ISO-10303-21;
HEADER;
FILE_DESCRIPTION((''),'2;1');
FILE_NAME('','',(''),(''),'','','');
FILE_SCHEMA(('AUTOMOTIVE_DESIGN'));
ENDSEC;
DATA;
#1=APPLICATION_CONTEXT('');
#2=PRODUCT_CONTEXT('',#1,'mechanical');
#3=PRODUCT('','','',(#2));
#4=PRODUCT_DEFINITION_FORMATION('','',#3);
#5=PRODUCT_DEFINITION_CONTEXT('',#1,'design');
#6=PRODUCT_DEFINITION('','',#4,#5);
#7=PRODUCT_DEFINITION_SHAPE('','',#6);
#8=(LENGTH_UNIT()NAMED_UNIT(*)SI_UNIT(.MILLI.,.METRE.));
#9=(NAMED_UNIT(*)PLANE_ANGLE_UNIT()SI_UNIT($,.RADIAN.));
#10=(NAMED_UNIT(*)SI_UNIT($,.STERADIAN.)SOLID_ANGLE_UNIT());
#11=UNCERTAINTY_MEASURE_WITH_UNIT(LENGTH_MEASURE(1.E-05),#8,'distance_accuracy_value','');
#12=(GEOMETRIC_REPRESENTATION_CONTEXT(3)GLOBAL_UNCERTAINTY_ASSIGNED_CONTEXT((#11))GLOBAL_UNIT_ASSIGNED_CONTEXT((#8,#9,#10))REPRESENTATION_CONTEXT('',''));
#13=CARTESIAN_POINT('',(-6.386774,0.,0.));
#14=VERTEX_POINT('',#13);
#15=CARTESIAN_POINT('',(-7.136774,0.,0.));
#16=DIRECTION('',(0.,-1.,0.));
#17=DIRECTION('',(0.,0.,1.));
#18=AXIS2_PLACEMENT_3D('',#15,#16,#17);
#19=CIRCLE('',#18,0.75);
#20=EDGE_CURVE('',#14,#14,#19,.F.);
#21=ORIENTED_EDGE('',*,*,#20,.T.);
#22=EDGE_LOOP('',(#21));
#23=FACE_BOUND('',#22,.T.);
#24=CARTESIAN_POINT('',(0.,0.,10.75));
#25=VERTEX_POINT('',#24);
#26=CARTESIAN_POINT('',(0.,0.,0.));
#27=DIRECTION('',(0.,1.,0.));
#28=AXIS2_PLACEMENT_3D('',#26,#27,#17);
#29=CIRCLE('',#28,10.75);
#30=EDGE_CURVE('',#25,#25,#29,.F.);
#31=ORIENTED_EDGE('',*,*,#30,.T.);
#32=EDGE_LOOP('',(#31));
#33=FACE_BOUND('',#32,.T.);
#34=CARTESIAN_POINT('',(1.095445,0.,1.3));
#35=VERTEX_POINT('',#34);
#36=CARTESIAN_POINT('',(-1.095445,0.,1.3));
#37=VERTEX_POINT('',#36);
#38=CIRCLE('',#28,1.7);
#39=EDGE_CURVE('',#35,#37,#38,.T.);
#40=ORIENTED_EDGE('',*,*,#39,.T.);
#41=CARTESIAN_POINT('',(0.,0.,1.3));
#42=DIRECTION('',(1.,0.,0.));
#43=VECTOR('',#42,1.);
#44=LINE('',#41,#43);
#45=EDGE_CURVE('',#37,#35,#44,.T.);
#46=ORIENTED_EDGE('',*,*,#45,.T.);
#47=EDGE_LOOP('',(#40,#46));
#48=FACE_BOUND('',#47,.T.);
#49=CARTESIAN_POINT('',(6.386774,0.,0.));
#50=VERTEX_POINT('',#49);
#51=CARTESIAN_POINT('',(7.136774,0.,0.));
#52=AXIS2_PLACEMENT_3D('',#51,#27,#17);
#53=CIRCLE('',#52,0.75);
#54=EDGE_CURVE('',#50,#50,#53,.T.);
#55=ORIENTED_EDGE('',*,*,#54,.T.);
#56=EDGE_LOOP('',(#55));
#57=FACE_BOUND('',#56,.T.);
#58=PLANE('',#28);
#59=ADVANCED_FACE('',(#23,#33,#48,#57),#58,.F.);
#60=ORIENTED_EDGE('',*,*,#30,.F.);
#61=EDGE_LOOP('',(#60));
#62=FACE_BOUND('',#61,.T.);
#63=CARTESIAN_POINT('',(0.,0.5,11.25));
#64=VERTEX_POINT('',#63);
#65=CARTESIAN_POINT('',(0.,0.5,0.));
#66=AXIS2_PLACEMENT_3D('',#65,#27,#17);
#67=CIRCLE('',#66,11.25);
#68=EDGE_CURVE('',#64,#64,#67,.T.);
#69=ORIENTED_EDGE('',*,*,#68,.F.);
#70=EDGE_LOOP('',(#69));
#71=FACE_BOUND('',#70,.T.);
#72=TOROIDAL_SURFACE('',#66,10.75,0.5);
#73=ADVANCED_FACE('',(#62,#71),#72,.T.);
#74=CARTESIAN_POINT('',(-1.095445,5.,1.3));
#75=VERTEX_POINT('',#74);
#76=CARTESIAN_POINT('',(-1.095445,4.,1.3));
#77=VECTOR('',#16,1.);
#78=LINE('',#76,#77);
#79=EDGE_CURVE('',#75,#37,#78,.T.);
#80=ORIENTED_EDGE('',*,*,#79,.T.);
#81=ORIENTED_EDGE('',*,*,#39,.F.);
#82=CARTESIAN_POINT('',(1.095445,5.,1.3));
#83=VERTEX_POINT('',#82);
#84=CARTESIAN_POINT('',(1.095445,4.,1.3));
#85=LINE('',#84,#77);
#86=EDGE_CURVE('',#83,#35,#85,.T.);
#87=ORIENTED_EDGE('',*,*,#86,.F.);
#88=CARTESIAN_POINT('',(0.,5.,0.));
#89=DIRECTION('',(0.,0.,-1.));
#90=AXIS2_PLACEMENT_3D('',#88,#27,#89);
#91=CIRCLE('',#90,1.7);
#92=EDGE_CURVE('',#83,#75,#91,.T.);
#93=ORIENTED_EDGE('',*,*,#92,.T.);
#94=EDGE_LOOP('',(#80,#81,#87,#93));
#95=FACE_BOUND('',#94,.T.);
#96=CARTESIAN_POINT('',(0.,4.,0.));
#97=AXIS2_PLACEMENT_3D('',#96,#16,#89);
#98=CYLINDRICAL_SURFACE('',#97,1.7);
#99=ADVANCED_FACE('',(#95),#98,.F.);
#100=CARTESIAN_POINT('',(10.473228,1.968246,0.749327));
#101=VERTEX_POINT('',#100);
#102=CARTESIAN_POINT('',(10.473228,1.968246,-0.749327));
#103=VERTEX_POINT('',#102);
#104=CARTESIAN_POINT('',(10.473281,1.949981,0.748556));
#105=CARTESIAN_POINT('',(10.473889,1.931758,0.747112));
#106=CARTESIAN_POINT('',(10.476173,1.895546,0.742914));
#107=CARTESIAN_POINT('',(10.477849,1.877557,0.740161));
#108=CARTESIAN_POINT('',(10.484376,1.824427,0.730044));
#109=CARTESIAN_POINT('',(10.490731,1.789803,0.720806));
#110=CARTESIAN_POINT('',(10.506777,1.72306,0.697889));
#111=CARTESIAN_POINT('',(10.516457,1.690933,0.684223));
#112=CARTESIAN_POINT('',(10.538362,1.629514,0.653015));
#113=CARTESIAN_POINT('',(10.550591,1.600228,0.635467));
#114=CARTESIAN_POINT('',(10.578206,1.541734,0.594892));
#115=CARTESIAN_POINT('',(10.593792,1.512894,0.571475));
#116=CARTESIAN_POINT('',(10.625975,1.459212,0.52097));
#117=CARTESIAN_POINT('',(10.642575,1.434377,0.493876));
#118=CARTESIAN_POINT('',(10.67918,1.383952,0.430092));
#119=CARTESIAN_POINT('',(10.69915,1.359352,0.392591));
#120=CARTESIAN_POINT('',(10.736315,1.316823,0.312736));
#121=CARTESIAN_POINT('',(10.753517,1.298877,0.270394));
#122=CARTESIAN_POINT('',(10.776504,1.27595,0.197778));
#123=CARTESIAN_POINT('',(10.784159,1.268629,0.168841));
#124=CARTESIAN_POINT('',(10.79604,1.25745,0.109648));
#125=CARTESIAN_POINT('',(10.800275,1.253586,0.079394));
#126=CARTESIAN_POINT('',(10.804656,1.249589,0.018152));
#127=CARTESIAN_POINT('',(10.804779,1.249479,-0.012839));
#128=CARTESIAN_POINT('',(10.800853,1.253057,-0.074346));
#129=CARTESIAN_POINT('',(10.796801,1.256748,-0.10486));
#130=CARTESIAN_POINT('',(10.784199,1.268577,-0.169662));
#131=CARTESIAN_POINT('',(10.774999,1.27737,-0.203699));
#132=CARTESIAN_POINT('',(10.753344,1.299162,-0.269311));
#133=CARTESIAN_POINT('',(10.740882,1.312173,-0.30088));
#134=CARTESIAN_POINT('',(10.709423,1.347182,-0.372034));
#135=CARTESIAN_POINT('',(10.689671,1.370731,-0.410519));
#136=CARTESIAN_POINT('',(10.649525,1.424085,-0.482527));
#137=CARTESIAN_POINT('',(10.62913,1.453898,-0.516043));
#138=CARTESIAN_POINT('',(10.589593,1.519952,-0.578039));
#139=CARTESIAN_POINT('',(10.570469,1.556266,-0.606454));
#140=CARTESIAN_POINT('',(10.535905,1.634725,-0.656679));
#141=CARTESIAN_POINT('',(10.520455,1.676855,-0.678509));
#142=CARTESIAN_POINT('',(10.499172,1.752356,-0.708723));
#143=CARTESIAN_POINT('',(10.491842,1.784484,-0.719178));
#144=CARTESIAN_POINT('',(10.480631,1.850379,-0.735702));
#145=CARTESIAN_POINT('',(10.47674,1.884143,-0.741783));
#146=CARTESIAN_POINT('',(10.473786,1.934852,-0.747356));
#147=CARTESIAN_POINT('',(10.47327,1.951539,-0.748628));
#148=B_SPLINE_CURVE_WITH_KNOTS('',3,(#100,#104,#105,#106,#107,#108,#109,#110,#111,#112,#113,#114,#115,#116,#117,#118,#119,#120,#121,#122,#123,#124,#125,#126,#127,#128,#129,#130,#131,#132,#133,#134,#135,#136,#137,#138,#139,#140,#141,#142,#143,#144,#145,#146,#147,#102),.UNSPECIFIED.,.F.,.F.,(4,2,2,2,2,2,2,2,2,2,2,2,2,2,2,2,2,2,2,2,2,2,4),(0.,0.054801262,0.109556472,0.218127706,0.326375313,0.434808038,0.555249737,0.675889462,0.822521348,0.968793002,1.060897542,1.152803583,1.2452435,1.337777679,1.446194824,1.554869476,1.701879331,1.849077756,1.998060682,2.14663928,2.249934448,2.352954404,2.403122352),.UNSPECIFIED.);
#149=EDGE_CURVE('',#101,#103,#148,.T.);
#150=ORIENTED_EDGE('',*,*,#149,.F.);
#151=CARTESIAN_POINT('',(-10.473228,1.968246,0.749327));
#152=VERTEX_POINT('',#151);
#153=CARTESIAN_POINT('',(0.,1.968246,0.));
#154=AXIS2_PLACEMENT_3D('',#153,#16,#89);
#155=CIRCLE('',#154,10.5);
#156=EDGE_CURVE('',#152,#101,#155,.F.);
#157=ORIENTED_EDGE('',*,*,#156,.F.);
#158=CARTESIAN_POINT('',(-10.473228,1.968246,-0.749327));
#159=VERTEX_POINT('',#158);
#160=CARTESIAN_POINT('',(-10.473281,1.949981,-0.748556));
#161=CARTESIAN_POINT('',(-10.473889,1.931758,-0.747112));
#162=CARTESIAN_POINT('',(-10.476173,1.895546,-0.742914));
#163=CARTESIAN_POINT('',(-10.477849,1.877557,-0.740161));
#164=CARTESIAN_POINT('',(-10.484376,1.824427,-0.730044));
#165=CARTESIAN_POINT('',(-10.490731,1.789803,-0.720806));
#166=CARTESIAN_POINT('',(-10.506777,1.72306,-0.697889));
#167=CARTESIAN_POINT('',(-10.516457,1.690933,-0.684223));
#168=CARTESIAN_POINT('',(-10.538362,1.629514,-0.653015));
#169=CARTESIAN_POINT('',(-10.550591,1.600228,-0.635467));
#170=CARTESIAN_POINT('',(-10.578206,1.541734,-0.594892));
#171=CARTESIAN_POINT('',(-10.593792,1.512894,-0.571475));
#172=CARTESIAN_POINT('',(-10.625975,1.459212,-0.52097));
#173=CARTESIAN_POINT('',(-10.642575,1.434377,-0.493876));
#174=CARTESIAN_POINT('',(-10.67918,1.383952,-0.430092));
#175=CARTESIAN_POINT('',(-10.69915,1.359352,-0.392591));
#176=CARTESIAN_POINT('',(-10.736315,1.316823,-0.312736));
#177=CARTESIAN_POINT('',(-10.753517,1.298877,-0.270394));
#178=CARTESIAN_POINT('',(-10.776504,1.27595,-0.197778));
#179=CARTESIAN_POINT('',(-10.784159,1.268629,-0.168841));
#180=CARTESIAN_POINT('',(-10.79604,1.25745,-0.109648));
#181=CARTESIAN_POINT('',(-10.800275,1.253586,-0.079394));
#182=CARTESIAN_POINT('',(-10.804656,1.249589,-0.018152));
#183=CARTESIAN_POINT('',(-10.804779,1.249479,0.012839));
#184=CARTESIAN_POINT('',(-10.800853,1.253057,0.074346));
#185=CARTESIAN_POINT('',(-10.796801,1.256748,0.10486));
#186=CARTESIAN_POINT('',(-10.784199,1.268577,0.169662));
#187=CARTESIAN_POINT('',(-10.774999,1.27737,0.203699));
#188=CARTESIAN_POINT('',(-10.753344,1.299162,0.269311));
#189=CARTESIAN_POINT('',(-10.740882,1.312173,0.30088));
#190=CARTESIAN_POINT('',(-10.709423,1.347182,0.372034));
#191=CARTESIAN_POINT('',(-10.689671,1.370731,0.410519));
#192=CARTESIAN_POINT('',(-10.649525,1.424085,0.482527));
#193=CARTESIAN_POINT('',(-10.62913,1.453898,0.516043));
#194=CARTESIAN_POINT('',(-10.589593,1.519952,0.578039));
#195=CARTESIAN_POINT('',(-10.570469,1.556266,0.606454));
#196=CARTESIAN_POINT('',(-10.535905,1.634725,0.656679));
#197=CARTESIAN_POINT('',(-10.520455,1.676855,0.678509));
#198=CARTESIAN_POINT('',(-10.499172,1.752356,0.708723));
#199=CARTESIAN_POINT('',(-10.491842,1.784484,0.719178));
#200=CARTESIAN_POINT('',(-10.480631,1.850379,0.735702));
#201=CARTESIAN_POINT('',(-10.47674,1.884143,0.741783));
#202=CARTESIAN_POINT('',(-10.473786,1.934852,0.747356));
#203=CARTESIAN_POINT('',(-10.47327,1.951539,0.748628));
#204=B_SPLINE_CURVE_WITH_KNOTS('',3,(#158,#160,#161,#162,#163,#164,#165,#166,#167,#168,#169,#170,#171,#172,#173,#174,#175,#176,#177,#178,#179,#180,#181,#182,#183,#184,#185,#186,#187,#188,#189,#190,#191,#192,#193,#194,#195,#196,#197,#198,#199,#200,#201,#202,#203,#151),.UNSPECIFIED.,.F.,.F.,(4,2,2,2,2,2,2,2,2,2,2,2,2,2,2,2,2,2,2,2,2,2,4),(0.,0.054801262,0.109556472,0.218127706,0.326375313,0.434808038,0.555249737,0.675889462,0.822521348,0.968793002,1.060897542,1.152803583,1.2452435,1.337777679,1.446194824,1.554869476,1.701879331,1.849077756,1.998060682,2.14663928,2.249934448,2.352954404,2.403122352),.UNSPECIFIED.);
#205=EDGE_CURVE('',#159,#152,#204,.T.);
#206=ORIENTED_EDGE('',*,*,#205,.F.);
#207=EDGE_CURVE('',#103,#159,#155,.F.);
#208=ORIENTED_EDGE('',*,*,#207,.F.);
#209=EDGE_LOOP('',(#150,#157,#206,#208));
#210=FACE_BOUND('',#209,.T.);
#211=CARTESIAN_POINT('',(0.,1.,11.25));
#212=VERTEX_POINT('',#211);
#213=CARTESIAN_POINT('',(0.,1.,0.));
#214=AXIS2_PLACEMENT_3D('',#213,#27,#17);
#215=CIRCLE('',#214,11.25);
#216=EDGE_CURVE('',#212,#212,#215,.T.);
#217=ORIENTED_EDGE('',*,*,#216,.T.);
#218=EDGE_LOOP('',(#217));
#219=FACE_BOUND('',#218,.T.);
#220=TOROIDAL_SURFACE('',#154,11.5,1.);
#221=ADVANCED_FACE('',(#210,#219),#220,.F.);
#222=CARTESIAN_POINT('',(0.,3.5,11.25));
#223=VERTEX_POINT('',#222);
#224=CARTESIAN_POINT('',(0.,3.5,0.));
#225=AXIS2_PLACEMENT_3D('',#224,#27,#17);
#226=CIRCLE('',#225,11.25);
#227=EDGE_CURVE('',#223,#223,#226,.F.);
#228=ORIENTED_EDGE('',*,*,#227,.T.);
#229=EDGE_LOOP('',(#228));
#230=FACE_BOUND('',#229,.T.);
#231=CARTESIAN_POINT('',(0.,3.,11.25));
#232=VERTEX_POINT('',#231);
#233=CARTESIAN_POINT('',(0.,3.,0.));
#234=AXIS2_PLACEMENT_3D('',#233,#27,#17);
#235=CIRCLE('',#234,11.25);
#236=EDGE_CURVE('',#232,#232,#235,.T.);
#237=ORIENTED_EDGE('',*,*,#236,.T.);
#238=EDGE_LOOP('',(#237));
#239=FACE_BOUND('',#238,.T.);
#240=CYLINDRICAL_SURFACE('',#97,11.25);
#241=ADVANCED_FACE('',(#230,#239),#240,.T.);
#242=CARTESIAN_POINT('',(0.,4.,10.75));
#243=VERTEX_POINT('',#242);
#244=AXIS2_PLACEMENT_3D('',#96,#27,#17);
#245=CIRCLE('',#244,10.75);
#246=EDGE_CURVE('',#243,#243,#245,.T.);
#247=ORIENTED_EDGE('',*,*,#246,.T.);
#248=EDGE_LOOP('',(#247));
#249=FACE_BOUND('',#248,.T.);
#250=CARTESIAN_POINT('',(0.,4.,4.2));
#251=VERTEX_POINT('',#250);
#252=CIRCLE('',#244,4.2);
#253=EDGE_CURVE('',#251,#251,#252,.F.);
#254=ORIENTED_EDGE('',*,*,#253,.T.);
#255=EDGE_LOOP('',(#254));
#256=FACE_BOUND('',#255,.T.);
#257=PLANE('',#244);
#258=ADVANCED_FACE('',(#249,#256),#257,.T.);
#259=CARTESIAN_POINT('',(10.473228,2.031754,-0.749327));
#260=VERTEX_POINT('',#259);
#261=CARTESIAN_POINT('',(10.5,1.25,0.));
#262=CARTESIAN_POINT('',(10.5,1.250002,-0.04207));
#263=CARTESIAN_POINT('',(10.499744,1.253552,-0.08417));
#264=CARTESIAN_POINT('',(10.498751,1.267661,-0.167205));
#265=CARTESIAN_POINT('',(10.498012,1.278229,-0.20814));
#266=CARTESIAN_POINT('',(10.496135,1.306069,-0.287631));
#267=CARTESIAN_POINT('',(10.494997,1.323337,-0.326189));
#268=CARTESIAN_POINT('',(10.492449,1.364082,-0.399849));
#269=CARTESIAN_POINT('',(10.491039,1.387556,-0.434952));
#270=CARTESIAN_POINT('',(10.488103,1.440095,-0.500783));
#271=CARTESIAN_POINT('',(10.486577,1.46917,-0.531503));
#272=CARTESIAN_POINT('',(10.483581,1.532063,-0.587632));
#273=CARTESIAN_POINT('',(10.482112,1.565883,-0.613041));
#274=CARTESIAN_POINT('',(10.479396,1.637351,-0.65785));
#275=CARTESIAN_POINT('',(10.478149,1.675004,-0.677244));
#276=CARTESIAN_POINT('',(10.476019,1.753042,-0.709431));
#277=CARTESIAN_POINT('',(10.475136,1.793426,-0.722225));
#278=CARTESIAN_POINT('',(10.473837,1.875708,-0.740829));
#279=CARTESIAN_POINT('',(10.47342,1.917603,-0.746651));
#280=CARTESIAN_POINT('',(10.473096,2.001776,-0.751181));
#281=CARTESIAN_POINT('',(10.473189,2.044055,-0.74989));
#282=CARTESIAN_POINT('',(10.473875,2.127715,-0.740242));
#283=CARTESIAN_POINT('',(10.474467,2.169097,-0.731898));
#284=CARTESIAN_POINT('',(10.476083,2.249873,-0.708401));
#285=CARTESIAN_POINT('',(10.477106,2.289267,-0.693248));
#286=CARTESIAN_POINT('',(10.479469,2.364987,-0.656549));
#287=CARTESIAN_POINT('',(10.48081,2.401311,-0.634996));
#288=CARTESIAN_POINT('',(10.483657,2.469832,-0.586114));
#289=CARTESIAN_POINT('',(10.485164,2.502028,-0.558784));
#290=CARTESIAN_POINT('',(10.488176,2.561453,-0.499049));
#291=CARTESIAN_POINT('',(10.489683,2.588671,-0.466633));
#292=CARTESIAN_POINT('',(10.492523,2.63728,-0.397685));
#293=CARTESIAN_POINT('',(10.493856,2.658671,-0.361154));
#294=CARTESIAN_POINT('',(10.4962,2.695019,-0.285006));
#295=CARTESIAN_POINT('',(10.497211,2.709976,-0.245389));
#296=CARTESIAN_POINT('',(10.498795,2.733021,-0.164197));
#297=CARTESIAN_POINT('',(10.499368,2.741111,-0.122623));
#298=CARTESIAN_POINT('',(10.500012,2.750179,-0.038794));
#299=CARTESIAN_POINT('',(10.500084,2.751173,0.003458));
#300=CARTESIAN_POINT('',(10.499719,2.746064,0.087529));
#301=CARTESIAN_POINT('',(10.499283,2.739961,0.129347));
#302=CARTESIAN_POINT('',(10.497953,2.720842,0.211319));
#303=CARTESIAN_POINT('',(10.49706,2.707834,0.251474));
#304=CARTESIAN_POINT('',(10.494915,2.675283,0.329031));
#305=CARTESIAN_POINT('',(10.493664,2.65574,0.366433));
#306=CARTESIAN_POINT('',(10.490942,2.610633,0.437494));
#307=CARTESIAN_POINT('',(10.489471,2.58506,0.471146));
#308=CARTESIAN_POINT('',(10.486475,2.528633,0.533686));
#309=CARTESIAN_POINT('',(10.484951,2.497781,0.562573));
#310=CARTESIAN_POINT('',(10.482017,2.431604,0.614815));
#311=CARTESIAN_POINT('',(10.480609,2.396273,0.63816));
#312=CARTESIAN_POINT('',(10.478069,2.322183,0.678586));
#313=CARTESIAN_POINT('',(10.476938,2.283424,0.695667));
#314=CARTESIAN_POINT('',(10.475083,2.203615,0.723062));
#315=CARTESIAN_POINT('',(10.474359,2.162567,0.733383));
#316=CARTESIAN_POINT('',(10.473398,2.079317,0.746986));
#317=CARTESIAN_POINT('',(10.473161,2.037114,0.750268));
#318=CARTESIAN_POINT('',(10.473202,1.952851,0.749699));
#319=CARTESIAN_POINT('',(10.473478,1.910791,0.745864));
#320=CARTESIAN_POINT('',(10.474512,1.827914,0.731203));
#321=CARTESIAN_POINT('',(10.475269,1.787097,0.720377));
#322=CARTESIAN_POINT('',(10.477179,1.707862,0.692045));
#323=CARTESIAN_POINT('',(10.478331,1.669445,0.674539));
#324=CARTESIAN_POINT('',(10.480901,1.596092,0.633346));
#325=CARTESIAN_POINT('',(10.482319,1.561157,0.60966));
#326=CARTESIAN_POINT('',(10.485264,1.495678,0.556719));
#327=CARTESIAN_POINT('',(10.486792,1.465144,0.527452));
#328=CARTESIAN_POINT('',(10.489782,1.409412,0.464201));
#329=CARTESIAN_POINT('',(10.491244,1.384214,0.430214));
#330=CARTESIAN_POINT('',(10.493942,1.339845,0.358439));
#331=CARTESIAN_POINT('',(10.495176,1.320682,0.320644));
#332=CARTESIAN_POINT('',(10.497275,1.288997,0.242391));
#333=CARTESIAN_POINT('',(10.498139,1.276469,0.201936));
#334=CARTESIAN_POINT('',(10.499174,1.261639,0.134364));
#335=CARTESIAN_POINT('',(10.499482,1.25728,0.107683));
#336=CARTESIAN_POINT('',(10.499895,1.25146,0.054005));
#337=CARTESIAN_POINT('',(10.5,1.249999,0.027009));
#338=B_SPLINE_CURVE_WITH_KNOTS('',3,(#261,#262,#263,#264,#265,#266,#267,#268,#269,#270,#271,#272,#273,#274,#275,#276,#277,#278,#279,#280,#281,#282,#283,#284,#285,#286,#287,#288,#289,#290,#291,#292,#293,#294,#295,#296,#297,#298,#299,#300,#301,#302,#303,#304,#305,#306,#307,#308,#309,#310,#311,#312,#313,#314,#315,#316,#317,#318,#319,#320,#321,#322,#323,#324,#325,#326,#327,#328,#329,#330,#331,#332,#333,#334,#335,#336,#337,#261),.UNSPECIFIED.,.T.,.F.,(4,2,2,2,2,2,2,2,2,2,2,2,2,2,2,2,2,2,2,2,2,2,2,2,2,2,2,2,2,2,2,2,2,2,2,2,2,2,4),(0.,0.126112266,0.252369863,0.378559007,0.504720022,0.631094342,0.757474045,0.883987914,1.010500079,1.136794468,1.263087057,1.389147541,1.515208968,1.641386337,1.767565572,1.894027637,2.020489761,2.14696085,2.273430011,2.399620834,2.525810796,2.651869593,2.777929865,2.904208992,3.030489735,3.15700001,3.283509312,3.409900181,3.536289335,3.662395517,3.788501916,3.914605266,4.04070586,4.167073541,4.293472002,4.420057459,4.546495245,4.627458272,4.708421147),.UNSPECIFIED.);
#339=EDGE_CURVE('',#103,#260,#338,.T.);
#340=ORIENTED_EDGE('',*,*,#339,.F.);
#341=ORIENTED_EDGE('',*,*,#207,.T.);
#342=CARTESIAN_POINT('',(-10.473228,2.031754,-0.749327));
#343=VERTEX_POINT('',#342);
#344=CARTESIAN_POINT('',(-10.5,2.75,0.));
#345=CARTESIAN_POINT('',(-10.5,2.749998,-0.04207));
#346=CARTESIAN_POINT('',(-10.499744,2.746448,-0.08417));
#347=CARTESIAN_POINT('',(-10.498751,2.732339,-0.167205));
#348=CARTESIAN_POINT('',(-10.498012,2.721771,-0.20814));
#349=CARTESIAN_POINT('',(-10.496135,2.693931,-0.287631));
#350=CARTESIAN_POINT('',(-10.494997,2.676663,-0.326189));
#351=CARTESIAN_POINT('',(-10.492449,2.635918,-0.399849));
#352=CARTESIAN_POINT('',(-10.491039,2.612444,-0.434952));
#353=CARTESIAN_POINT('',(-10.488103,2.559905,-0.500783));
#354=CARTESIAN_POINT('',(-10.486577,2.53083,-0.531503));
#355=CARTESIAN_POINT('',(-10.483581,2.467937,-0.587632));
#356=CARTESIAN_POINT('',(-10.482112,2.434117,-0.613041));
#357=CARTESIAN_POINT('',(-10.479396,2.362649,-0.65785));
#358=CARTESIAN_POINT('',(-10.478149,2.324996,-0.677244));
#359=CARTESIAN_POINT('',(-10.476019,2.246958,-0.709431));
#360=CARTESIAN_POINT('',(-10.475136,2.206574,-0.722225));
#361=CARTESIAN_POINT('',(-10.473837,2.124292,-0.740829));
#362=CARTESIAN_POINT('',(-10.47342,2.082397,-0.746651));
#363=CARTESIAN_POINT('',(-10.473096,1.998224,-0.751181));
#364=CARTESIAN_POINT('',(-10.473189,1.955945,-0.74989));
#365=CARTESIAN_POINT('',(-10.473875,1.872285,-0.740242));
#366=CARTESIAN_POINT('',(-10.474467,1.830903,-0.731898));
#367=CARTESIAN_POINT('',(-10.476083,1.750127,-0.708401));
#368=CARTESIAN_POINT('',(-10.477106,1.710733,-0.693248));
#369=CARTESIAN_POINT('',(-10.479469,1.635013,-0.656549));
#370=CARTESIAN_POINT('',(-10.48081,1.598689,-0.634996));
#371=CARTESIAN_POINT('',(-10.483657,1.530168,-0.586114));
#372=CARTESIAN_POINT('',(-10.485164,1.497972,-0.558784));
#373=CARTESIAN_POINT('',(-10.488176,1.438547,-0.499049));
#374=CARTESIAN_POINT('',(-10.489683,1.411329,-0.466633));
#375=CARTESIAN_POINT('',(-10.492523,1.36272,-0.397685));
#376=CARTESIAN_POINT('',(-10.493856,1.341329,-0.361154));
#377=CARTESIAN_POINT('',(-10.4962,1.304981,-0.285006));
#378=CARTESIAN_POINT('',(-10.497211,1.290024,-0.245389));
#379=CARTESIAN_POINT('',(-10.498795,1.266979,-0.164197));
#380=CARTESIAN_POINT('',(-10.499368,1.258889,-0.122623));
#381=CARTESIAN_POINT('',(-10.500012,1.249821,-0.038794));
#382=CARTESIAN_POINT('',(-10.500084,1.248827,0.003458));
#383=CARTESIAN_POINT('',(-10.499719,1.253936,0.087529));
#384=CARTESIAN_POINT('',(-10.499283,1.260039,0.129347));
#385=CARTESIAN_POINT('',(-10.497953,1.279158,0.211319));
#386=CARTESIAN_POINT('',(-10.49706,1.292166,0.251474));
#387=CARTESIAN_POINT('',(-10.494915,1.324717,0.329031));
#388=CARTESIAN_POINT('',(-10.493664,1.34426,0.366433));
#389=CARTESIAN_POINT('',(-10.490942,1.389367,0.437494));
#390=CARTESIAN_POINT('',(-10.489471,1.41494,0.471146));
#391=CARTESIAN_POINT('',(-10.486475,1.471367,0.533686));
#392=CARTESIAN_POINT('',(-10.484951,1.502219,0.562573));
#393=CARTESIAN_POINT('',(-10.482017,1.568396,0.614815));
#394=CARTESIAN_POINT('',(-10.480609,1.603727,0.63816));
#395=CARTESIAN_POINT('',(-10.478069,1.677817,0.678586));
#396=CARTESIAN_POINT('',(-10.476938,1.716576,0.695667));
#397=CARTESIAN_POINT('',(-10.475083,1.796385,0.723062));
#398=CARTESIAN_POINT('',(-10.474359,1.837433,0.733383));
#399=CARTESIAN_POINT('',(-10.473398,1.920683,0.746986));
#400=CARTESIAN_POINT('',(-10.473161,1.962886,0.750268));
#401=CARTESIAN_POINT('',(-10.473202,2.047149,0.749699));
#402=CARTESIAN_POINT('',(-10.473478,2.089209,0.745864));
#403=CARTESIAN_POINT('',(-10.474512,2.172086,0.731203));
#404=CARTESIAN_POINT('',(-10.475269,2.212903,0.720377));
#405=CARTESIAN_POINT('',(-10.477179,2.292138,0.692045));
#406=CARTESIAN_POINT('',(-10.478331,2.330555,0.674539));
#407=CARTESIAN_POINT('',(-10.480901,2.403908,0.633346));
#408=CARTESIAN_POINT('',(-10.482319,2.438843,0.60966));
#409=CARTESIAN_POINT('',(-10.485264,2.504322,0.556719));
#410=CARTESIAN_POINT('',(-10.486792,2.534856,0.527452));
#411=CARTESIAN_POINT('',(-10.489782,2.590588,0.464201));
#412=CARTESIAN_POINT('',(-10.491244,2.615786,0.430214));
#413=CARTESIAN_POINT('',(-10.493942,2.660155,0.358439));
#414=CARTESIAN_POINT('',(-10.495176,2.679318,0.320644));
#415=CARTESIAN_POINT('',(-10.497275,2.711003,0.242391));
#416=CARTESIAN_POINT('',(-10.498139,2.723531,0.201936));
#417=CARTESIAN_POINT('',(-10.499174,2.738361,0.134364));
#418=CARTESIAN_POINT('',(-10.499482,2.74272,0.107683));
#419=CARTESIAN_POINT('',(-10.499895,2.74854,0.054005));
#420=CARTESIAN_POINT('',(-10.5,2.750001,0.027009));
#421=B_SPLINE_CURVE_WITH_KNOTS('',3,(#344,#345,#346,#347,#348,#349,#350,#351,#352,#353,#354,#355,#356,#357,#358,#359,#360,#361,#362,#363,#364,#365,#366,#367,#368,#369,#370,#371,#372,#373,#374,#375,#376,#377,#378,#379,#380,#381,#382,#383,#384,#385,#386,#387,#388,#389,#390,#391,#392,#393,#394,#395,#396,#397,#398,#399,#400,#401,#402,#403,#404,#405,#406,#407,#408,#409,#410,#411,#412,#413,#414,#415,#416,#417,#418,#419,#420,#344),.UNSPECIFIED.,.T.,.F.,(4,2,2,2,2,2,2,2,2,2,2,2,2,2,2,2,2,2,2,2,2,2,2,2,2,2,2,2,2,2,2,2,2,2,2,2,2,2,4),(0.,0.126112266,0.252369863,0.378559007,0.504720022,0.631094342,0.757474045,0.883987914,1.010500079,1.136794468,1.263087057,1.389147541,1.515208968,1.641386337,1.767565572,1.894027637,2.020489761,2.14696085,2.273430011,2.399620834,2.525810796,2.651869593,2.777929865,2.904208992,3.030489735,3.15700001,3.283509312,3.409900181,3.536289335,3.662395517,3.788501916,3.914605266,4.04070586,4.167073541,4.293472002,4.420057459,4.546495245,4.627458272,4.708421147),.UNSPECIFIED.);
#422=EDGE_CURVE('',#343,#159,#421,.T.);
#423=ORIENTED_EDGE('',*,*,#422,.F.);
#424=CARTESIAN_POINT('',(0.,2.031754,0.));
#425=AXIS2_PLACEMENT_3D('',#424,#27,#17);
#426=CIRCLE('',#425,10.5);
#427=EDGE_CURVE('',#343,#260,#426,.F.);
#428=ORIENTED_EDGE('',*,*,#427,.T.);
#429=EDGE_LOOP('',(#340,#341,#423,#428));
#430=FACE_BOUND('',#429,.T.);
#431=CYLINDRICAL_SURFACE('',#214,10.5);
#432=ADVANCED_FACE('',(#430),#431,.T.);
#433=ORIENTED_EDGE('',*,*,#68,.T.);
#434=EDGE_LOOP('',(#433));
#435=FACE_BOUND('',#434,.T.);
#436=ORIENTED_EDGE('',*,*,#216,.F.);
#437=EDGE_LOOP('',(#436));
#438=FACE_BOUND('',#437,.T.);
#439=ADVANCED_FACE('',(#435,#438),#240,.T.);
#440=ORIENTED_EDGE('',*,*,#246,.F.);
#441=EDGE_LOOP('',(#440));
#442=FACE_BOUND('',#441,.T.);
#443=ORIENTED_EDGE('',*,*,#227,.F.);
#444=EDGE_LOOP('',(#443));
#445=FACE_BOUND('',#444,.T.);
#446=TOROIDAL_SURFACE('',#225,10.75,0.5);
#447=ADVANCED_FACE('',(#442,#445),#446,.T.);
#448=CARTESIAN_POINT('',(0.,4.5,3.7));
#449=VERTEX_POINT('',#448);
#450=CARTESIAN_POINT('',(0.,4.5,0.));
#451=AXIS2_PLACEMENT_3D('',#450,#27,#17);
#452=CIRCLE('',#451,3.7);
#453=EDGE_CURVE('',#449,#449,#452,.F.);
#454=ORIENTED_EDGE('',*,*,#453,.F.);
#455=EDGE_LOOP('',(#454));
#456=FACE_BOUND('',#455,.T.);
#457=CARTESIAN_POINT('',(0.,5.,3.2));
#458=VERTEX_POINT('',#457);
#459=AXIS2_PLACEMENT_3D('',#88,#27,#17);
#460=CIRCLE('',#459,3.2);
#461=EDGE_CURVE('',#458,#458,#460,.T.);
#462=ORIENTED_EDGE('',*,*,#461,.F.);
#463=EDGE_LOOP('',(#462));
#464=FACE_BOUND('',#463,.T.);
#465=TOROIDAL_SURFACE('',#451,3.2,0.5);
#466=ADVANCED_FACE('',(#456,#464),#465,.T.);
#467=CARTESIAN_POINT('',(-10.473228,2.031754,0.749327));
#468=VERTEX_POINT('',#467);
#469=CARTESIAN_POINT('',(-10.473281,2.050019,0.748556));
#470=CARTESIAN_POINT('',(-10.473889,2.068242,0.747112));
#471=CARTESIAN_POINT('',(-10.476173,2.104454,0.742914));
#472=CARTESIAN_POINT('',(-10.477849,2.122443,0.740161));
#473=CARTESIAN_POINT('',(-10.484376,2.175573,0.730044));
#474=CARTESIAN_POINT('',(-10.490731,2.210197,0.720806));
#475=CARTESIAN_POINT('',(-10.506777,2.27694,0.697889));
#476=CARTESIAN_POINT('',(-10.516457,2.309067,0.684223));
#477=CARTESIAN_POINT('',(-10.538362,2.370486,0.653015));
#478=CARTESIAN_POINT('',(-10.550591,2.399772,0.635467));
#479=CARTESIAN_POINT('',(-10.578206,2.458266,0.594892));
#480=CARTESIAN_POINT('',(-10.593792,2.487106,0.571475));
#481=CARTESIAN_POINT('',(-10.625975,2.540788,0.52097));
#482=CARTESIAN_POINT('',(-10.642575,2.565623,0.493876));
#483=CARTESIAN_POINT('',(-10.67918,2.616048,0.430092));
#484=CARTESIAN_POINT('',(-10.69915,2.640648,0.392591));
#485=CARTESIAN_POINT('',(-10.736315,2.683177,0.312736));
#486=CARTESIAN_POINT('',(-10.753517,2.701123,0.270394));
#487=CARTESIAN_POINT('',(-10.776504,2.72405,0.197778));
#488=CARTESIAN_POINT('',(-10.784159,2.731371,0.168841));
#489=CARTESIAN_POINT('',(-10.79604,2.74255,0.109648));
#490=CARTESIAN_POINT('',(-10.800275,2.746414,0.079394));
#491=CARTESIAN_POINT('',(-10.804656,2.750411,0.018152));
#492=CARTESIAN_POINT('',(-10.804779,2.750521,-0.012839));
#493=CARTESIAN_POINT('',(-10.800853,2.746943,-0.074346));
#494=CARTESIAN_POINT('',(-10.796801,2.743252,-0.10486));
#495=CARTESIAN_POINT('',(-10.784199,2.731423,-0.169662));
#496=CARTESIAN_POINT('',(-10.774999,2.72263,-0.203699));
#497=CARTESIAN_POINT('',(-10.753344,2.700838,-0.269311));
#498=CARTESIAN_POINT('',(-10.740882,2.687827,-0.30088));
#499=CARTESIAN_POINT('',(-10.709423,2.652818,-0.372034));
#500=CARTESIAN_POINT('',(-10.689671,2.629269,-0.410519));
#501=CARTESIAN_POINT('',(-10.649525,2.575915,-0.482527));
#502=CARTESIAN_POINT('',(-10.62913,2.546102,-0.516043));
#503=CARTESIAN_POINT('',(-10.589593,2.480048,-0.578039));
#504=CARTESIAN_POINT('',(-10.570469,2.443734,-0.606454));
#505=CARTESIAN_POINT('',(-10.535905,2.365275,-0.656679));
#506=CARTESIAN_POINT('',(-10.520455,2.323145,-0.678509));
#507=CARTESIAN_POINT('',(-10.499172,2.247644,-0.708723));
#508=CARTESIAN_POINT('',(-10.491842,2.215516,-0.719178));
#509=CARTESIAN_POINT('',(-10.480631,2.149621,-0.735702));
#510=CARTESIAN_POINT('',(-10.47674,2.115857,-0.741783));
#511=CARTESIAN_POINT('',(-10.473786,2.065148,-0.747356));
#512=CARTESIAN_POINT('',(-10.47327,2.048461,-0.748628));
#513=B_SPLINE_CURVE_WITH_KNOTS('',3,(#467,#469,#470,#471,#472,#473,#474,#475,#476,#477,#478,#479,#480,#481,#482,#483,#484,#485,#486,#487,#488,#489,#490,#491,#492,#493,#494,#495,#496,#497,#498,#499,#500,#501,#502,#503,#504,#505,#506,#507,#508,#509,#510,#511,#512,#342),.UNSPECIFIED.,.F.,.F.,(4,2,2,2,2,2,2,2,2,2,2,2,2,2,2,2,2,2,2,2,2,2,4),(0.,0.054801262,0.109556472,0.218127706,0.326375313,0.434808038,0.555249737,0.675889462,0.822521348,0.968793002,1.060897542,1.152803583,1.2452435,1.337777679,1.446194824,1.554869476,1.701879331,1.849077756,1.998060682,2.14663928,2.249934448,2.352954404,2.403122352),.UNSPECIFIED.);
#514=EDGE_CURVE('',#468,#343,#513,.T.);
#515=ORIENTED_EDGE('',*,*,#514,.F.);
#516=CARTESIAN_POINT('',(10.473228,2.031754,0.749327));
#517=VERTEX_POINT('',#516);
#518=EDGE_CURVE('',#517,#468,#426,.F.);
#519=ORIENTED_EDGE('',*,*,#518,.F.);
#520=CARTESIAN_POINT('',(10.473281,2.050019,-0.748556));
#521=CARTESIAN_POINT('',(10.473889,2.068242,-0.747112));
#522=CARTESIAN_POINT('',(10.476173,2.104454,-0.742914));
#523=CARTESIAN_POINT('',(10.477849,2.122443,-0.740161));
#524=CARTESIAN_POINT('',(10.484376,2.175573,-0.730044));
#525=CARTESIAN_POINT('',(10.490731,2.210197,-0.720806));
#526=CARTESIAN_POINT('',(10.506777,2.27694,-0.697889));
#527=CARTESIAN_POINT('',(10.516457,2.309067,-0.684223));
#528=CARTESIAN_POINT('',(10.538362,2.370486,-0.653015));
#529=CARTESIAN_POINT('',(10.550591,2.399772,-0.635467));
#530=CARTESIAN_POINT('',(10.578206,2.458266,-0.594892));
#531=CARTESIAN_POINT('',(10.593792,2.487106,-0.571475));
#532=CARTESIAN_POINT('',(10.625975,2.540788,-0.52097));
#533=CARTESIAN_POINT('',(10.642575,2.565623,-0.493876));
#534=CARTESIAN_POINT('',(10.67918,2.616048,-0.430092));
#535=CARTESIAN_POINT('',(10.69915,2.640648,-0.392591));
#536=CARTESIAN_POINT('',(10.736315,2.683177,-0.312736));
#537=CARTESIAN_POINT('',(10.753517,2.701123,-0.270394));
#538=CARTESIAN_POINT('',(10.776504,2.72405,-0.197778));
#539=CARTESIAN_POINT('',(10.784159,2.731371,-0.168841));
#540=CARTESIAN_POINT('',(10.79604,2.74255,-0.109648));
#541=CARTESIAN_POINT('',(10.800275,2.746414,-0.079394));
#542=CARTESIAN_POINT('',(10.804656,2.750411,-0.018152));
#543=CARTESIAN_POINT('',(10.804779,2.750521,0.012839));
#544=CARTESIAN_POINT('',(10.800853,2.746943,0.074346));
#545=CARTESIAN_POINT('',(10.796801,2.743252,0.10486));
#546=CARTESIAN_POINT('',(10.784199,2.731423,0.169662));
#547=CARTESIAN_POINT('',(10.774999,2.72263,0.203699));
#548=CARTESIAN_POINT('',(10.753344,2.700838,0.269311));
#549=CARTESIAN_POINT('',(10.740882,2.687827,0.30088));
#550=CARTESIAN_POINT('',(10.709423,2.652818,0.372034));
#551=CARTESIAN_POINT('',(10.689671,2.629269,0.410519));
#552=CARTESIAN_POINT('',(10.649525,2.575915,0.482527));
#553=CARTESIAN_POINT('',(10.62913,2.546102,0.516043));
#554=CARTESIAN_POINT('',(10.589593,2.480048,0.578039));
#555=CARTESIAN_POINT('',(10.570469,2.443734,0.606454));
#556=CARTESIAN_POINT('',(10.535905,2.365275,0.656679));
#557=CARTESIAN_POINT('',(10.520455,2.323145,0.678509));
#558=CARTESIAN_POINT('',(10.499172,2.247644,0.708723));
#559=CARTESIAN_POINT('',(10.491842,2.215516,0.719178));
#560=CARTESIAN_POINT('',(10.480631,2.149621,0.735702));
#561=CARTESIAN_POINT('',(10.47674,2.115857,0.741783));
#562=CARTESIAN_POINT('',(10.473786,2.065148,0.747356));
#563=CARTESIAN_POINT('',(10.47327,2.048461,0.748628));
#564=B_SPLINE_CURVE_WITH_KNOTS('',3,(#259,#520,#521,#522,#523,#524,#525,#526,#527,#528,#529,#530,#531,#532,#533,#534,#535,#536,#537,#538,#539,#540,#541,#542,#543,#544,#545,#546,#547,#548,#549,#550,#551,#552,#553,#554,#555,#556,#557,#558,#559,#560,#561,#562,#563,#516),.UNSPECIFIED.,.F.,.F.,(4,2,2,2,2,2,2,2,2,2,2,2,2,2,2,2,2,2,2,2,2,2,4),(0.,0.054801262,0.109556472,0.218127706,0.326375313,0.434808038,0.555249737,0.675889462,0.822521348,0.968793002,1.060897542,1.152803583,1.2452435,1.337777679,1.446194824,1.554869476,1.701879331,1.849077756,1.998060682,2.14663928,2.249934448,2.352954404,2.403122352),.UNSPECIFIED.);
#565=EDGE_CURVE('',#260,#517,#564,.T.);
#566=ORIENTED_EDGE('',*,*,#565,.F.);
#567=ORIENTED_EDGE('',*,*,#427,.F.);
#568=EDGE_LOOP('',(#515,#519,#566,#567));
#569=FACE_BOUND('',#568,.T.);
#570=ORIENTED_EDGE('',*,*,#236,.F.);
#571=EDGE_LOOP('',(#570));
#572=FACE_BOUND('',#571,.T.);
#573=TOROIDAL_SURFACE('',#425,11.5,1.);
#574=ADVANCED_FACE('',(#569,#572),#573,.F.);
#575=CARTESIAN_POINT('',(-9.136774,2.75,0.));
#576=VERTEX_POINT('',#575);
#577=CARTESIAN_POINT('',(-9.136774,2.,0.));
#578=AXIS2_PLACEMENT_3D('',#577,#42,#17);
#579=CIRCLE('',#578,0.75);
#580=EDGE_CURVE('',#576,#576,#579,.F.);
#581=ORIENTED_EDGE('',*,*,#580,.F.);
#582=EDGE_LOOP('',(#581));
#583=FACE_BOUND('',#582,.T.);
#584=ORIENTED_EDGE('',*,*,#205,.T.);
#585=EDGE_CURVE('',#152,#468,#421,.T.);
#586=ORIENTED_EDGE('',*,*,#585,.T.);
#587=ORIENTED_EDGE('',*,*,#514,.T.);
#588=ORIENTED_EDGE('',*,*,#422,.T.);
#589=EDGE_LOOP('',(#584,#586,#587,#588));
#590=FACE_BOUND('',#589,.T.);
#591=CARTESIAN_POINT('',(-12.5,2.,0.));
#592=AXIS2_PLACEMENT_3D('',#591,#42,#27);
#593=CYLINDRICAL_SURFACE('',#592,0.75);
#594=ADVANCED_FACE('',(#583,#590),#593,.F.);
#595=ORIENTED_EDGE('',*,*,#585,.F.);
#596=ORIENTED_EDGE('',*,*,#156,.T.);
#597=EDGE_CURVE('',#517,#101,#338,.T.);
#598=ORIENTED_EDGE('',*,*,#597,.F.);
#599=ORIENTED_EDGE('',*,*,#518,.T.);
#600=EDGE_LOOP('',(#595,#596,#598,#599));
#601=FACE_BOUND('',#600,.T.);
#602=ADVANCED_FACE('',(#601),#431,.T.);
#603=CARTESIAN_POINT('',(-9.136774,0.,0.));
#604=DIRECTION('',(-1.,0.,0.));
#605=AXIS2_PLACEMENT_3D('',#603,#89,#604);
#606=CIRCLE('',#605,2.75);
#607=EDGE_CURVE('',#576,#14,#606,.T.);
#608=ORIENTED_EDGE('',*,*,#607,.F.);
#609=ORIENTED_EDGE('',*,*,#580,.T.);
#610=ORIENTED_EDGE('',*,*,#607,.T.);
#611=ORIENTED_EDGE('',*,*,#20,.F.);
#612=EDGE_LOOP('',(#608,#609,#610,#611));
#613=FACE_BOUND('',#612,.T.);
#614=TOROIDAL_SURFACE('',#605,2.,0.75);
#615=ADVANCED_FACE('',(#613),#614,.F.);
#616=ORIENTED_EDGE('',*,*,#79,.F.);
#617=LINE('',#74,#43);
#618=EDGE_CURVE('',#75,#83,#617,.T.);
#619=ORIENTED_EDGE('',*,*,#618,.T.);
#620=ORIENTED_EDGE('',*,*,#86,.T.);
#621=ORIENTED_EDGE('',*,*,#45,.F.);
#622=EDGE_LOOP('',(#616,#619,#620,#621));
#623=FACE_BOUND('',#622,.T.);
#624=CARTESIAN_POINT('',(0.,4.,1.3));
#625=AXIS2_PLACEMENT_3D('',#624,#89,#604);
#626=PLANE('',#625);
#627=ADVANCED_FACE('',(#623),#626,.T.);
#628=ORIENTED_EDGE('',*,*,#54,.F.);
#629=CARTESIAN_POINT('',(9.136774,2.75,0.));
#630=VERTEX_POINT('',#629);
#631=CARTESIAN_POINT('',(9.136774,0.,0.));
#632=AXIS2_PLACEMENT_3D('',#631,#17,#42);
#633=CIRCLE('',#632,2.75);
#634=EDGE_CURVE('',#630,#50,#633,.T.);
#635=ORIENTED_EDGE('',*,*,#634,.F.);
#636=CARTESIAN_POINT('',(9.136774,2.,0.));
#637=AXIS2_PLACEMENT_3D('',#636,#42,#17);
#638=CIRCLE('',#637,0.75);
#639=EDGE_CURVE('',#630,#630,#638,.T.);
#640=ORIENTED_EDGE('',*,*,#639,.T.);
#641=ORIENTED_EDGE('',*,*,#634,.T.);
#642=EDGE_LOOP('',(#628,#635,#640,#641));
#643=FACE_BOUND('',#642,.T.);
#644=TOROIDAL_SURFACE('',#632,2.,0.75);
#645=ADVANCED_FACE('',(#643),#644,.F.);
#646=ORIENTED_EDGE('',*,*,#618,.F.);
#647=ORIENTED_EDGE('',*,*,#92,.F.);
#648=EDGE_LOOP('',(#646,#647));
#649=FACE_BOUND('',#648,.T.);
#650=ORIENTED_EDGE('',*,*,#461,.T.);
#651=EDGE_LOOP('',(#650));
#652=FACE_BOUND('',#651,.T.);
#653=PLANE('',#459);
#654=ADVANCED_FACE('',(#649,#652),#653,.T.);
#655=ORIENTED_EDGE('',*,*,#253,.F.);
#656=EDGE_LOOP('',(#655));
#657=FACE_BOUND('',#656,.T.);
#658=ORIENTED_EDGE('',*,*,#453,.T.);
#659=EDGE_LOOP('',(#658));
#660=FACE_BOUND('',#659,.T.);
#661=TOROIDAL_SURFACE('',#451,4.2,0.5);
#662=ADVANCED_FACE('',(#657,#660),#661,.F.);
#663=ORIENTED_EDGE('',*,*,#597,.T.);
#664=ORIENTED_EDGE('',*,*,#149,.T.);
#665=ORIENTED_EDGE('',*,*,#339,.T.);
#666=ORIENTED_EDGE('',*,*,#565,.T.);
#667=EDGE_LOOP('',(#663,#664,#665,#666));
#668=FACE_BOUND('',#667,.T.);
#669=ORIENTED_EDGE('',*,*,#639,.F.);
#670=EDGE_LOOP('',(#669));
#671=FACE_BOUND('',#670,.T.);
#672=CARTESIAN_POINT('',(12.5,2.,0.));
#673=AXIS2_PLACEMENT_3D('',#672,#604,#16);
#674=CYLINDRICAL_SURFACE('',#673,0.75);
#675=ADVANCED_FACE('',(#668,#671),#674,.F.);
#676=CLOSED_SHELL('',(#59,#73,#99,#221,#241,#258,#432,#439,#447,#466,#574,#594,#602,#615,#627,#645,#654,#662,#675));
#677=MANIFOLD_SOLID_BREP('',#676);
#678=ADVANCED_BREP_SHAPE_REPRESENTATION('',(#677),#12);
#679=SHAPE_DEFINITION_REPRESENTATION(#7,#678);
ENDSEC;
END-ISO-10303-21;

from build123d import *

# Parameters (mm, degrees)
SKETCH1_R            = 11.25
SKETCH1_R_2          = 1.7
BOSS_EXTRUDE1_DEPTH  = 4
SKETCH2_R            = 3.7
BOSS_EXTRUDE2_DEPTH  = 1
CUT_SWEEP1_PROFILE_R = 0.75
SKETCH21_R           = 12.5
SKETCH21_R_2         = 10.5
CUT_EXTRUDE1_DEPTH   = 1
FILLET1_R            = 1
FILLET2_R            = 0.5


# Some blends are built 0.0001 mm under size
with BuildPart() as part:
    # Sketch1 → Boss-Extrude1 (new body)
    # profile 1 of 5: a face of its own
    with BuildSketch(Plane(origin=(0, 0, 0), x_dir=(1, 0, 0), z_dir=(0, 1, 0))):
        with Locations(Location((0, 0, 0), (0, 0, 270))):
            Circle(SKETCH1_R)
        Circle(SKETCH1_R_2, mode=Mode.SUBTRACT)
    # profile 2 of 5: a face of its own
    with BuildSketch(Plane(origin=(0, 0, 0), x_dir=(1, 0, 0), z_dir=(0, 1, 0))):
        with BuildLine():
            Line((0, -1.3), (-1.095445115, -1.3))
            ThreePointArc((-1.095445115, -1.3), (-0.583095189, -1.596871942), (0, -1.7))
            Line((0, -1.7), (0, -1.3))
        make_face()
    # profile 3 of 5: a face of its own
    with BuildSketch(Plane(origin=(0, 0, 0), x_dir=(1, 0, 0), z_dir=(0, 1, 0))):
        with BuildLine():
            Line((1.095445115, -1.3), (0, -1.3))
            Line((0, -1.3), (0, -1.7))
            ThreePointArc((0, -1.7), (0.583095189, -1.596871942), (1.095445115, -1.3))
        make_face()
    # profile 4 of 5: a face of its own
    with BuildSketch(Plane(origin=(0, 0, 0), x_dir=(1, 0, 0), z_dir=(0, 1, 0))):
        with BuildLine():
            Line((0, -1.3), (-1.095445115, -1.3))
            ThreePointArc((-1.095445115, -1.3), (-0.583095189, -1.596871942), (0, -1.7))
            Line((0, -1.7), (0, -1.3))
        make_face()
    # profile 5 of 5: a face of its own
    with BuildSketch(Plane(origin=(0, 0, 0), x_dir=(1, 0, 0), z_dir=(0, 1, 0))):
        with BuildLine():
            Line((1.095445115, -1.3), (0, -1.3))
            Line((0, -1.3), (0, -1.7))
            ThreePointArc((0, -1.7), (0.583095189, -1.596871942), (1.095445115, -1.3))
        make_face()
    extrude(amount=BOSS_EXTRUDE1_DEPTH)

    # Sketch2 → Boss-Extrude2 (add)
    with BuildSketch(Plane(origin=(0, 4, 0), x_dir=(1, 0, 0), z_dir=(0, 1, 0))):
        with Locations(Location((0, 0, 0), (0, 0, 270))):
            Circle(SKETCH2_R)
        with BuildLine():
            Line((-1.095445115, -1.3), (1.095445115, -1.3))
            ThreePointArc((1.095445115, -1.3), (0, 1.7), (-1.095445115, -1.3))
        make_face(mode=Mode.SUBTRACT)
    extrude(amount=BOSS_EXTRUDE2_DEPTH)

    # Cut-Sweep1: sweep along a curve in space
    with BuildLine() as cut_sweep1_path:
        Line((12.5, 2, 0), (9.136774381, 2, 0))
        ThreePointArc((7.136774381, 0, 0), (7.722560819, 1.414213562, 0), (9.136774381, 2, 0))
        Line((7.136774381, 0, 0), (7.136774381, -2.281561943, 0))
    # Cut-Sweep1 profile (on start of the path) → Cut-Sweep1 (sweep, cut)
    with BuildSketch(Plane(origin=(12.5, 2, 0), x_dir=(0, -1, 0), z_dir=(-1, 0, 0))):
        Circle(CUT_SWEEP1_PROFILE_R)
    cut_sweep1 = sweep(path=cut_sweep1_path.line, mode=Mode.SUBTRACT)

    # Mirror1: Cut-Sweep1 across plane
    add(cut_sweep1.mirror(Plane(origin=(0, 0, 0), x_dir=(0, 0, 1), z_dir=(1, 0, 0))), mode=Mode.SUBTRACT)

    # Sketch21 → Cut-Extrude1 (cut, symmetric)
    with BuildSketch(Plane(origin=(0, 2, 0), x_dir=(1, 0, 0), z_dir=(0, 1, 0))):
        Circle(SKETCH21_R)
        with Locations(Location((0, 0, 0), (0, 0, 270))):
            Circle(SKETCH21_R_2, mode=Mode.SUBTRACT)
    extrude(amount=CUT_EXTRUDE1_DEPTH, both=True, mode=Mode.SUBTRACT)

    # Fillet1
    # the kernel refuses this fillet: 1 mm, written as the material it adds along each edge
    with BuildSketch(Plane(origin=(0, 1, 0), x_dir=(0, 0, 1), z_dir=(-1, 0, 0))) as fillet1_piece_1_section:
        with BuildLine():
            CenterArc((11.5, 0.968245837), FILLET1_R, 180, 75.522487814)
            Line((10.5, 0.968245837), (10.48, 0.968245837))
            Line((10.48, 0.968245837), (10.48, 0))
            Line((10.48, 0), (10.5, -0.02))
            ThreePointArc((10.5, -0.02), (10.875, -0.02), (11.245, -0.019364917))
            Line((11.245, -0.019364917), (11.25, 0))
        make_face()
    fillet1_piece_1 = revolve(axis=Axis((0, 1, 0), (0, 1, 0)), mode=Mode.PRIVATE)
    fillet1_piece_1 = fillet1_piece_1 - Plane(origin=(0, 2, 0), x_dir=(0, -1, 0), z_dir=(-1, 0, 0)) * Cylinder(0.75, 45, mode=Mode.PRIVATE)
    add(fillet1_piece_1)
    with BuildSketch(Plane(origin=(0, 3, 0), x_dir=(0, 0, 1), z_dir=(-1, 0, 0))) as fillet1_piece_2_section:
        with BuildLine():
            CenterArc((11.5, -0.968245837), FILLET1_R, 104.477512186, 75.522487814)
            Line((11.25, 0), (11.245, 0.019364917))
            ThreePointArc((11.245, 0.019364917), (10.875, 0.02), (10.5, 0.02))
            Line((10.5, 0.02), (10.48, 0))
            Line((10.48, 0), (10.48, -0.968245837))
            Line((10.48, -0.968245837), (10.5, -0.968245837))
        make_face()
    fillet1_piece_2 = revolve(axis=Axis((0, 3, 0), (0, 1, 0)), mode=Mode.PRIVATE)
    fillet1_piece_2 = fillet1_piece_2 - Plane(origin=(0, 2, 0), x_dir=(0, -1, 0), z_dir=(-1, 0, 0)) * Cylinder(0.75, 45, mode=Mode.PRIVATE)
    add(fillet1_piece_2)

    # Fillet2
    fillet2_edges = [part.edges().sort_by_distance(p)[0] for p in [
        (0, 5, -3.7),
        (0, 4, -3.7),
        (0, 4, -11.25),
        (0, 0, -11.25),
    ]]
    fillet(fillet2_edges, radius=FILLET2_R - 0.0001)  # a hair under: the kernel refuses the full size


solid = part.part
